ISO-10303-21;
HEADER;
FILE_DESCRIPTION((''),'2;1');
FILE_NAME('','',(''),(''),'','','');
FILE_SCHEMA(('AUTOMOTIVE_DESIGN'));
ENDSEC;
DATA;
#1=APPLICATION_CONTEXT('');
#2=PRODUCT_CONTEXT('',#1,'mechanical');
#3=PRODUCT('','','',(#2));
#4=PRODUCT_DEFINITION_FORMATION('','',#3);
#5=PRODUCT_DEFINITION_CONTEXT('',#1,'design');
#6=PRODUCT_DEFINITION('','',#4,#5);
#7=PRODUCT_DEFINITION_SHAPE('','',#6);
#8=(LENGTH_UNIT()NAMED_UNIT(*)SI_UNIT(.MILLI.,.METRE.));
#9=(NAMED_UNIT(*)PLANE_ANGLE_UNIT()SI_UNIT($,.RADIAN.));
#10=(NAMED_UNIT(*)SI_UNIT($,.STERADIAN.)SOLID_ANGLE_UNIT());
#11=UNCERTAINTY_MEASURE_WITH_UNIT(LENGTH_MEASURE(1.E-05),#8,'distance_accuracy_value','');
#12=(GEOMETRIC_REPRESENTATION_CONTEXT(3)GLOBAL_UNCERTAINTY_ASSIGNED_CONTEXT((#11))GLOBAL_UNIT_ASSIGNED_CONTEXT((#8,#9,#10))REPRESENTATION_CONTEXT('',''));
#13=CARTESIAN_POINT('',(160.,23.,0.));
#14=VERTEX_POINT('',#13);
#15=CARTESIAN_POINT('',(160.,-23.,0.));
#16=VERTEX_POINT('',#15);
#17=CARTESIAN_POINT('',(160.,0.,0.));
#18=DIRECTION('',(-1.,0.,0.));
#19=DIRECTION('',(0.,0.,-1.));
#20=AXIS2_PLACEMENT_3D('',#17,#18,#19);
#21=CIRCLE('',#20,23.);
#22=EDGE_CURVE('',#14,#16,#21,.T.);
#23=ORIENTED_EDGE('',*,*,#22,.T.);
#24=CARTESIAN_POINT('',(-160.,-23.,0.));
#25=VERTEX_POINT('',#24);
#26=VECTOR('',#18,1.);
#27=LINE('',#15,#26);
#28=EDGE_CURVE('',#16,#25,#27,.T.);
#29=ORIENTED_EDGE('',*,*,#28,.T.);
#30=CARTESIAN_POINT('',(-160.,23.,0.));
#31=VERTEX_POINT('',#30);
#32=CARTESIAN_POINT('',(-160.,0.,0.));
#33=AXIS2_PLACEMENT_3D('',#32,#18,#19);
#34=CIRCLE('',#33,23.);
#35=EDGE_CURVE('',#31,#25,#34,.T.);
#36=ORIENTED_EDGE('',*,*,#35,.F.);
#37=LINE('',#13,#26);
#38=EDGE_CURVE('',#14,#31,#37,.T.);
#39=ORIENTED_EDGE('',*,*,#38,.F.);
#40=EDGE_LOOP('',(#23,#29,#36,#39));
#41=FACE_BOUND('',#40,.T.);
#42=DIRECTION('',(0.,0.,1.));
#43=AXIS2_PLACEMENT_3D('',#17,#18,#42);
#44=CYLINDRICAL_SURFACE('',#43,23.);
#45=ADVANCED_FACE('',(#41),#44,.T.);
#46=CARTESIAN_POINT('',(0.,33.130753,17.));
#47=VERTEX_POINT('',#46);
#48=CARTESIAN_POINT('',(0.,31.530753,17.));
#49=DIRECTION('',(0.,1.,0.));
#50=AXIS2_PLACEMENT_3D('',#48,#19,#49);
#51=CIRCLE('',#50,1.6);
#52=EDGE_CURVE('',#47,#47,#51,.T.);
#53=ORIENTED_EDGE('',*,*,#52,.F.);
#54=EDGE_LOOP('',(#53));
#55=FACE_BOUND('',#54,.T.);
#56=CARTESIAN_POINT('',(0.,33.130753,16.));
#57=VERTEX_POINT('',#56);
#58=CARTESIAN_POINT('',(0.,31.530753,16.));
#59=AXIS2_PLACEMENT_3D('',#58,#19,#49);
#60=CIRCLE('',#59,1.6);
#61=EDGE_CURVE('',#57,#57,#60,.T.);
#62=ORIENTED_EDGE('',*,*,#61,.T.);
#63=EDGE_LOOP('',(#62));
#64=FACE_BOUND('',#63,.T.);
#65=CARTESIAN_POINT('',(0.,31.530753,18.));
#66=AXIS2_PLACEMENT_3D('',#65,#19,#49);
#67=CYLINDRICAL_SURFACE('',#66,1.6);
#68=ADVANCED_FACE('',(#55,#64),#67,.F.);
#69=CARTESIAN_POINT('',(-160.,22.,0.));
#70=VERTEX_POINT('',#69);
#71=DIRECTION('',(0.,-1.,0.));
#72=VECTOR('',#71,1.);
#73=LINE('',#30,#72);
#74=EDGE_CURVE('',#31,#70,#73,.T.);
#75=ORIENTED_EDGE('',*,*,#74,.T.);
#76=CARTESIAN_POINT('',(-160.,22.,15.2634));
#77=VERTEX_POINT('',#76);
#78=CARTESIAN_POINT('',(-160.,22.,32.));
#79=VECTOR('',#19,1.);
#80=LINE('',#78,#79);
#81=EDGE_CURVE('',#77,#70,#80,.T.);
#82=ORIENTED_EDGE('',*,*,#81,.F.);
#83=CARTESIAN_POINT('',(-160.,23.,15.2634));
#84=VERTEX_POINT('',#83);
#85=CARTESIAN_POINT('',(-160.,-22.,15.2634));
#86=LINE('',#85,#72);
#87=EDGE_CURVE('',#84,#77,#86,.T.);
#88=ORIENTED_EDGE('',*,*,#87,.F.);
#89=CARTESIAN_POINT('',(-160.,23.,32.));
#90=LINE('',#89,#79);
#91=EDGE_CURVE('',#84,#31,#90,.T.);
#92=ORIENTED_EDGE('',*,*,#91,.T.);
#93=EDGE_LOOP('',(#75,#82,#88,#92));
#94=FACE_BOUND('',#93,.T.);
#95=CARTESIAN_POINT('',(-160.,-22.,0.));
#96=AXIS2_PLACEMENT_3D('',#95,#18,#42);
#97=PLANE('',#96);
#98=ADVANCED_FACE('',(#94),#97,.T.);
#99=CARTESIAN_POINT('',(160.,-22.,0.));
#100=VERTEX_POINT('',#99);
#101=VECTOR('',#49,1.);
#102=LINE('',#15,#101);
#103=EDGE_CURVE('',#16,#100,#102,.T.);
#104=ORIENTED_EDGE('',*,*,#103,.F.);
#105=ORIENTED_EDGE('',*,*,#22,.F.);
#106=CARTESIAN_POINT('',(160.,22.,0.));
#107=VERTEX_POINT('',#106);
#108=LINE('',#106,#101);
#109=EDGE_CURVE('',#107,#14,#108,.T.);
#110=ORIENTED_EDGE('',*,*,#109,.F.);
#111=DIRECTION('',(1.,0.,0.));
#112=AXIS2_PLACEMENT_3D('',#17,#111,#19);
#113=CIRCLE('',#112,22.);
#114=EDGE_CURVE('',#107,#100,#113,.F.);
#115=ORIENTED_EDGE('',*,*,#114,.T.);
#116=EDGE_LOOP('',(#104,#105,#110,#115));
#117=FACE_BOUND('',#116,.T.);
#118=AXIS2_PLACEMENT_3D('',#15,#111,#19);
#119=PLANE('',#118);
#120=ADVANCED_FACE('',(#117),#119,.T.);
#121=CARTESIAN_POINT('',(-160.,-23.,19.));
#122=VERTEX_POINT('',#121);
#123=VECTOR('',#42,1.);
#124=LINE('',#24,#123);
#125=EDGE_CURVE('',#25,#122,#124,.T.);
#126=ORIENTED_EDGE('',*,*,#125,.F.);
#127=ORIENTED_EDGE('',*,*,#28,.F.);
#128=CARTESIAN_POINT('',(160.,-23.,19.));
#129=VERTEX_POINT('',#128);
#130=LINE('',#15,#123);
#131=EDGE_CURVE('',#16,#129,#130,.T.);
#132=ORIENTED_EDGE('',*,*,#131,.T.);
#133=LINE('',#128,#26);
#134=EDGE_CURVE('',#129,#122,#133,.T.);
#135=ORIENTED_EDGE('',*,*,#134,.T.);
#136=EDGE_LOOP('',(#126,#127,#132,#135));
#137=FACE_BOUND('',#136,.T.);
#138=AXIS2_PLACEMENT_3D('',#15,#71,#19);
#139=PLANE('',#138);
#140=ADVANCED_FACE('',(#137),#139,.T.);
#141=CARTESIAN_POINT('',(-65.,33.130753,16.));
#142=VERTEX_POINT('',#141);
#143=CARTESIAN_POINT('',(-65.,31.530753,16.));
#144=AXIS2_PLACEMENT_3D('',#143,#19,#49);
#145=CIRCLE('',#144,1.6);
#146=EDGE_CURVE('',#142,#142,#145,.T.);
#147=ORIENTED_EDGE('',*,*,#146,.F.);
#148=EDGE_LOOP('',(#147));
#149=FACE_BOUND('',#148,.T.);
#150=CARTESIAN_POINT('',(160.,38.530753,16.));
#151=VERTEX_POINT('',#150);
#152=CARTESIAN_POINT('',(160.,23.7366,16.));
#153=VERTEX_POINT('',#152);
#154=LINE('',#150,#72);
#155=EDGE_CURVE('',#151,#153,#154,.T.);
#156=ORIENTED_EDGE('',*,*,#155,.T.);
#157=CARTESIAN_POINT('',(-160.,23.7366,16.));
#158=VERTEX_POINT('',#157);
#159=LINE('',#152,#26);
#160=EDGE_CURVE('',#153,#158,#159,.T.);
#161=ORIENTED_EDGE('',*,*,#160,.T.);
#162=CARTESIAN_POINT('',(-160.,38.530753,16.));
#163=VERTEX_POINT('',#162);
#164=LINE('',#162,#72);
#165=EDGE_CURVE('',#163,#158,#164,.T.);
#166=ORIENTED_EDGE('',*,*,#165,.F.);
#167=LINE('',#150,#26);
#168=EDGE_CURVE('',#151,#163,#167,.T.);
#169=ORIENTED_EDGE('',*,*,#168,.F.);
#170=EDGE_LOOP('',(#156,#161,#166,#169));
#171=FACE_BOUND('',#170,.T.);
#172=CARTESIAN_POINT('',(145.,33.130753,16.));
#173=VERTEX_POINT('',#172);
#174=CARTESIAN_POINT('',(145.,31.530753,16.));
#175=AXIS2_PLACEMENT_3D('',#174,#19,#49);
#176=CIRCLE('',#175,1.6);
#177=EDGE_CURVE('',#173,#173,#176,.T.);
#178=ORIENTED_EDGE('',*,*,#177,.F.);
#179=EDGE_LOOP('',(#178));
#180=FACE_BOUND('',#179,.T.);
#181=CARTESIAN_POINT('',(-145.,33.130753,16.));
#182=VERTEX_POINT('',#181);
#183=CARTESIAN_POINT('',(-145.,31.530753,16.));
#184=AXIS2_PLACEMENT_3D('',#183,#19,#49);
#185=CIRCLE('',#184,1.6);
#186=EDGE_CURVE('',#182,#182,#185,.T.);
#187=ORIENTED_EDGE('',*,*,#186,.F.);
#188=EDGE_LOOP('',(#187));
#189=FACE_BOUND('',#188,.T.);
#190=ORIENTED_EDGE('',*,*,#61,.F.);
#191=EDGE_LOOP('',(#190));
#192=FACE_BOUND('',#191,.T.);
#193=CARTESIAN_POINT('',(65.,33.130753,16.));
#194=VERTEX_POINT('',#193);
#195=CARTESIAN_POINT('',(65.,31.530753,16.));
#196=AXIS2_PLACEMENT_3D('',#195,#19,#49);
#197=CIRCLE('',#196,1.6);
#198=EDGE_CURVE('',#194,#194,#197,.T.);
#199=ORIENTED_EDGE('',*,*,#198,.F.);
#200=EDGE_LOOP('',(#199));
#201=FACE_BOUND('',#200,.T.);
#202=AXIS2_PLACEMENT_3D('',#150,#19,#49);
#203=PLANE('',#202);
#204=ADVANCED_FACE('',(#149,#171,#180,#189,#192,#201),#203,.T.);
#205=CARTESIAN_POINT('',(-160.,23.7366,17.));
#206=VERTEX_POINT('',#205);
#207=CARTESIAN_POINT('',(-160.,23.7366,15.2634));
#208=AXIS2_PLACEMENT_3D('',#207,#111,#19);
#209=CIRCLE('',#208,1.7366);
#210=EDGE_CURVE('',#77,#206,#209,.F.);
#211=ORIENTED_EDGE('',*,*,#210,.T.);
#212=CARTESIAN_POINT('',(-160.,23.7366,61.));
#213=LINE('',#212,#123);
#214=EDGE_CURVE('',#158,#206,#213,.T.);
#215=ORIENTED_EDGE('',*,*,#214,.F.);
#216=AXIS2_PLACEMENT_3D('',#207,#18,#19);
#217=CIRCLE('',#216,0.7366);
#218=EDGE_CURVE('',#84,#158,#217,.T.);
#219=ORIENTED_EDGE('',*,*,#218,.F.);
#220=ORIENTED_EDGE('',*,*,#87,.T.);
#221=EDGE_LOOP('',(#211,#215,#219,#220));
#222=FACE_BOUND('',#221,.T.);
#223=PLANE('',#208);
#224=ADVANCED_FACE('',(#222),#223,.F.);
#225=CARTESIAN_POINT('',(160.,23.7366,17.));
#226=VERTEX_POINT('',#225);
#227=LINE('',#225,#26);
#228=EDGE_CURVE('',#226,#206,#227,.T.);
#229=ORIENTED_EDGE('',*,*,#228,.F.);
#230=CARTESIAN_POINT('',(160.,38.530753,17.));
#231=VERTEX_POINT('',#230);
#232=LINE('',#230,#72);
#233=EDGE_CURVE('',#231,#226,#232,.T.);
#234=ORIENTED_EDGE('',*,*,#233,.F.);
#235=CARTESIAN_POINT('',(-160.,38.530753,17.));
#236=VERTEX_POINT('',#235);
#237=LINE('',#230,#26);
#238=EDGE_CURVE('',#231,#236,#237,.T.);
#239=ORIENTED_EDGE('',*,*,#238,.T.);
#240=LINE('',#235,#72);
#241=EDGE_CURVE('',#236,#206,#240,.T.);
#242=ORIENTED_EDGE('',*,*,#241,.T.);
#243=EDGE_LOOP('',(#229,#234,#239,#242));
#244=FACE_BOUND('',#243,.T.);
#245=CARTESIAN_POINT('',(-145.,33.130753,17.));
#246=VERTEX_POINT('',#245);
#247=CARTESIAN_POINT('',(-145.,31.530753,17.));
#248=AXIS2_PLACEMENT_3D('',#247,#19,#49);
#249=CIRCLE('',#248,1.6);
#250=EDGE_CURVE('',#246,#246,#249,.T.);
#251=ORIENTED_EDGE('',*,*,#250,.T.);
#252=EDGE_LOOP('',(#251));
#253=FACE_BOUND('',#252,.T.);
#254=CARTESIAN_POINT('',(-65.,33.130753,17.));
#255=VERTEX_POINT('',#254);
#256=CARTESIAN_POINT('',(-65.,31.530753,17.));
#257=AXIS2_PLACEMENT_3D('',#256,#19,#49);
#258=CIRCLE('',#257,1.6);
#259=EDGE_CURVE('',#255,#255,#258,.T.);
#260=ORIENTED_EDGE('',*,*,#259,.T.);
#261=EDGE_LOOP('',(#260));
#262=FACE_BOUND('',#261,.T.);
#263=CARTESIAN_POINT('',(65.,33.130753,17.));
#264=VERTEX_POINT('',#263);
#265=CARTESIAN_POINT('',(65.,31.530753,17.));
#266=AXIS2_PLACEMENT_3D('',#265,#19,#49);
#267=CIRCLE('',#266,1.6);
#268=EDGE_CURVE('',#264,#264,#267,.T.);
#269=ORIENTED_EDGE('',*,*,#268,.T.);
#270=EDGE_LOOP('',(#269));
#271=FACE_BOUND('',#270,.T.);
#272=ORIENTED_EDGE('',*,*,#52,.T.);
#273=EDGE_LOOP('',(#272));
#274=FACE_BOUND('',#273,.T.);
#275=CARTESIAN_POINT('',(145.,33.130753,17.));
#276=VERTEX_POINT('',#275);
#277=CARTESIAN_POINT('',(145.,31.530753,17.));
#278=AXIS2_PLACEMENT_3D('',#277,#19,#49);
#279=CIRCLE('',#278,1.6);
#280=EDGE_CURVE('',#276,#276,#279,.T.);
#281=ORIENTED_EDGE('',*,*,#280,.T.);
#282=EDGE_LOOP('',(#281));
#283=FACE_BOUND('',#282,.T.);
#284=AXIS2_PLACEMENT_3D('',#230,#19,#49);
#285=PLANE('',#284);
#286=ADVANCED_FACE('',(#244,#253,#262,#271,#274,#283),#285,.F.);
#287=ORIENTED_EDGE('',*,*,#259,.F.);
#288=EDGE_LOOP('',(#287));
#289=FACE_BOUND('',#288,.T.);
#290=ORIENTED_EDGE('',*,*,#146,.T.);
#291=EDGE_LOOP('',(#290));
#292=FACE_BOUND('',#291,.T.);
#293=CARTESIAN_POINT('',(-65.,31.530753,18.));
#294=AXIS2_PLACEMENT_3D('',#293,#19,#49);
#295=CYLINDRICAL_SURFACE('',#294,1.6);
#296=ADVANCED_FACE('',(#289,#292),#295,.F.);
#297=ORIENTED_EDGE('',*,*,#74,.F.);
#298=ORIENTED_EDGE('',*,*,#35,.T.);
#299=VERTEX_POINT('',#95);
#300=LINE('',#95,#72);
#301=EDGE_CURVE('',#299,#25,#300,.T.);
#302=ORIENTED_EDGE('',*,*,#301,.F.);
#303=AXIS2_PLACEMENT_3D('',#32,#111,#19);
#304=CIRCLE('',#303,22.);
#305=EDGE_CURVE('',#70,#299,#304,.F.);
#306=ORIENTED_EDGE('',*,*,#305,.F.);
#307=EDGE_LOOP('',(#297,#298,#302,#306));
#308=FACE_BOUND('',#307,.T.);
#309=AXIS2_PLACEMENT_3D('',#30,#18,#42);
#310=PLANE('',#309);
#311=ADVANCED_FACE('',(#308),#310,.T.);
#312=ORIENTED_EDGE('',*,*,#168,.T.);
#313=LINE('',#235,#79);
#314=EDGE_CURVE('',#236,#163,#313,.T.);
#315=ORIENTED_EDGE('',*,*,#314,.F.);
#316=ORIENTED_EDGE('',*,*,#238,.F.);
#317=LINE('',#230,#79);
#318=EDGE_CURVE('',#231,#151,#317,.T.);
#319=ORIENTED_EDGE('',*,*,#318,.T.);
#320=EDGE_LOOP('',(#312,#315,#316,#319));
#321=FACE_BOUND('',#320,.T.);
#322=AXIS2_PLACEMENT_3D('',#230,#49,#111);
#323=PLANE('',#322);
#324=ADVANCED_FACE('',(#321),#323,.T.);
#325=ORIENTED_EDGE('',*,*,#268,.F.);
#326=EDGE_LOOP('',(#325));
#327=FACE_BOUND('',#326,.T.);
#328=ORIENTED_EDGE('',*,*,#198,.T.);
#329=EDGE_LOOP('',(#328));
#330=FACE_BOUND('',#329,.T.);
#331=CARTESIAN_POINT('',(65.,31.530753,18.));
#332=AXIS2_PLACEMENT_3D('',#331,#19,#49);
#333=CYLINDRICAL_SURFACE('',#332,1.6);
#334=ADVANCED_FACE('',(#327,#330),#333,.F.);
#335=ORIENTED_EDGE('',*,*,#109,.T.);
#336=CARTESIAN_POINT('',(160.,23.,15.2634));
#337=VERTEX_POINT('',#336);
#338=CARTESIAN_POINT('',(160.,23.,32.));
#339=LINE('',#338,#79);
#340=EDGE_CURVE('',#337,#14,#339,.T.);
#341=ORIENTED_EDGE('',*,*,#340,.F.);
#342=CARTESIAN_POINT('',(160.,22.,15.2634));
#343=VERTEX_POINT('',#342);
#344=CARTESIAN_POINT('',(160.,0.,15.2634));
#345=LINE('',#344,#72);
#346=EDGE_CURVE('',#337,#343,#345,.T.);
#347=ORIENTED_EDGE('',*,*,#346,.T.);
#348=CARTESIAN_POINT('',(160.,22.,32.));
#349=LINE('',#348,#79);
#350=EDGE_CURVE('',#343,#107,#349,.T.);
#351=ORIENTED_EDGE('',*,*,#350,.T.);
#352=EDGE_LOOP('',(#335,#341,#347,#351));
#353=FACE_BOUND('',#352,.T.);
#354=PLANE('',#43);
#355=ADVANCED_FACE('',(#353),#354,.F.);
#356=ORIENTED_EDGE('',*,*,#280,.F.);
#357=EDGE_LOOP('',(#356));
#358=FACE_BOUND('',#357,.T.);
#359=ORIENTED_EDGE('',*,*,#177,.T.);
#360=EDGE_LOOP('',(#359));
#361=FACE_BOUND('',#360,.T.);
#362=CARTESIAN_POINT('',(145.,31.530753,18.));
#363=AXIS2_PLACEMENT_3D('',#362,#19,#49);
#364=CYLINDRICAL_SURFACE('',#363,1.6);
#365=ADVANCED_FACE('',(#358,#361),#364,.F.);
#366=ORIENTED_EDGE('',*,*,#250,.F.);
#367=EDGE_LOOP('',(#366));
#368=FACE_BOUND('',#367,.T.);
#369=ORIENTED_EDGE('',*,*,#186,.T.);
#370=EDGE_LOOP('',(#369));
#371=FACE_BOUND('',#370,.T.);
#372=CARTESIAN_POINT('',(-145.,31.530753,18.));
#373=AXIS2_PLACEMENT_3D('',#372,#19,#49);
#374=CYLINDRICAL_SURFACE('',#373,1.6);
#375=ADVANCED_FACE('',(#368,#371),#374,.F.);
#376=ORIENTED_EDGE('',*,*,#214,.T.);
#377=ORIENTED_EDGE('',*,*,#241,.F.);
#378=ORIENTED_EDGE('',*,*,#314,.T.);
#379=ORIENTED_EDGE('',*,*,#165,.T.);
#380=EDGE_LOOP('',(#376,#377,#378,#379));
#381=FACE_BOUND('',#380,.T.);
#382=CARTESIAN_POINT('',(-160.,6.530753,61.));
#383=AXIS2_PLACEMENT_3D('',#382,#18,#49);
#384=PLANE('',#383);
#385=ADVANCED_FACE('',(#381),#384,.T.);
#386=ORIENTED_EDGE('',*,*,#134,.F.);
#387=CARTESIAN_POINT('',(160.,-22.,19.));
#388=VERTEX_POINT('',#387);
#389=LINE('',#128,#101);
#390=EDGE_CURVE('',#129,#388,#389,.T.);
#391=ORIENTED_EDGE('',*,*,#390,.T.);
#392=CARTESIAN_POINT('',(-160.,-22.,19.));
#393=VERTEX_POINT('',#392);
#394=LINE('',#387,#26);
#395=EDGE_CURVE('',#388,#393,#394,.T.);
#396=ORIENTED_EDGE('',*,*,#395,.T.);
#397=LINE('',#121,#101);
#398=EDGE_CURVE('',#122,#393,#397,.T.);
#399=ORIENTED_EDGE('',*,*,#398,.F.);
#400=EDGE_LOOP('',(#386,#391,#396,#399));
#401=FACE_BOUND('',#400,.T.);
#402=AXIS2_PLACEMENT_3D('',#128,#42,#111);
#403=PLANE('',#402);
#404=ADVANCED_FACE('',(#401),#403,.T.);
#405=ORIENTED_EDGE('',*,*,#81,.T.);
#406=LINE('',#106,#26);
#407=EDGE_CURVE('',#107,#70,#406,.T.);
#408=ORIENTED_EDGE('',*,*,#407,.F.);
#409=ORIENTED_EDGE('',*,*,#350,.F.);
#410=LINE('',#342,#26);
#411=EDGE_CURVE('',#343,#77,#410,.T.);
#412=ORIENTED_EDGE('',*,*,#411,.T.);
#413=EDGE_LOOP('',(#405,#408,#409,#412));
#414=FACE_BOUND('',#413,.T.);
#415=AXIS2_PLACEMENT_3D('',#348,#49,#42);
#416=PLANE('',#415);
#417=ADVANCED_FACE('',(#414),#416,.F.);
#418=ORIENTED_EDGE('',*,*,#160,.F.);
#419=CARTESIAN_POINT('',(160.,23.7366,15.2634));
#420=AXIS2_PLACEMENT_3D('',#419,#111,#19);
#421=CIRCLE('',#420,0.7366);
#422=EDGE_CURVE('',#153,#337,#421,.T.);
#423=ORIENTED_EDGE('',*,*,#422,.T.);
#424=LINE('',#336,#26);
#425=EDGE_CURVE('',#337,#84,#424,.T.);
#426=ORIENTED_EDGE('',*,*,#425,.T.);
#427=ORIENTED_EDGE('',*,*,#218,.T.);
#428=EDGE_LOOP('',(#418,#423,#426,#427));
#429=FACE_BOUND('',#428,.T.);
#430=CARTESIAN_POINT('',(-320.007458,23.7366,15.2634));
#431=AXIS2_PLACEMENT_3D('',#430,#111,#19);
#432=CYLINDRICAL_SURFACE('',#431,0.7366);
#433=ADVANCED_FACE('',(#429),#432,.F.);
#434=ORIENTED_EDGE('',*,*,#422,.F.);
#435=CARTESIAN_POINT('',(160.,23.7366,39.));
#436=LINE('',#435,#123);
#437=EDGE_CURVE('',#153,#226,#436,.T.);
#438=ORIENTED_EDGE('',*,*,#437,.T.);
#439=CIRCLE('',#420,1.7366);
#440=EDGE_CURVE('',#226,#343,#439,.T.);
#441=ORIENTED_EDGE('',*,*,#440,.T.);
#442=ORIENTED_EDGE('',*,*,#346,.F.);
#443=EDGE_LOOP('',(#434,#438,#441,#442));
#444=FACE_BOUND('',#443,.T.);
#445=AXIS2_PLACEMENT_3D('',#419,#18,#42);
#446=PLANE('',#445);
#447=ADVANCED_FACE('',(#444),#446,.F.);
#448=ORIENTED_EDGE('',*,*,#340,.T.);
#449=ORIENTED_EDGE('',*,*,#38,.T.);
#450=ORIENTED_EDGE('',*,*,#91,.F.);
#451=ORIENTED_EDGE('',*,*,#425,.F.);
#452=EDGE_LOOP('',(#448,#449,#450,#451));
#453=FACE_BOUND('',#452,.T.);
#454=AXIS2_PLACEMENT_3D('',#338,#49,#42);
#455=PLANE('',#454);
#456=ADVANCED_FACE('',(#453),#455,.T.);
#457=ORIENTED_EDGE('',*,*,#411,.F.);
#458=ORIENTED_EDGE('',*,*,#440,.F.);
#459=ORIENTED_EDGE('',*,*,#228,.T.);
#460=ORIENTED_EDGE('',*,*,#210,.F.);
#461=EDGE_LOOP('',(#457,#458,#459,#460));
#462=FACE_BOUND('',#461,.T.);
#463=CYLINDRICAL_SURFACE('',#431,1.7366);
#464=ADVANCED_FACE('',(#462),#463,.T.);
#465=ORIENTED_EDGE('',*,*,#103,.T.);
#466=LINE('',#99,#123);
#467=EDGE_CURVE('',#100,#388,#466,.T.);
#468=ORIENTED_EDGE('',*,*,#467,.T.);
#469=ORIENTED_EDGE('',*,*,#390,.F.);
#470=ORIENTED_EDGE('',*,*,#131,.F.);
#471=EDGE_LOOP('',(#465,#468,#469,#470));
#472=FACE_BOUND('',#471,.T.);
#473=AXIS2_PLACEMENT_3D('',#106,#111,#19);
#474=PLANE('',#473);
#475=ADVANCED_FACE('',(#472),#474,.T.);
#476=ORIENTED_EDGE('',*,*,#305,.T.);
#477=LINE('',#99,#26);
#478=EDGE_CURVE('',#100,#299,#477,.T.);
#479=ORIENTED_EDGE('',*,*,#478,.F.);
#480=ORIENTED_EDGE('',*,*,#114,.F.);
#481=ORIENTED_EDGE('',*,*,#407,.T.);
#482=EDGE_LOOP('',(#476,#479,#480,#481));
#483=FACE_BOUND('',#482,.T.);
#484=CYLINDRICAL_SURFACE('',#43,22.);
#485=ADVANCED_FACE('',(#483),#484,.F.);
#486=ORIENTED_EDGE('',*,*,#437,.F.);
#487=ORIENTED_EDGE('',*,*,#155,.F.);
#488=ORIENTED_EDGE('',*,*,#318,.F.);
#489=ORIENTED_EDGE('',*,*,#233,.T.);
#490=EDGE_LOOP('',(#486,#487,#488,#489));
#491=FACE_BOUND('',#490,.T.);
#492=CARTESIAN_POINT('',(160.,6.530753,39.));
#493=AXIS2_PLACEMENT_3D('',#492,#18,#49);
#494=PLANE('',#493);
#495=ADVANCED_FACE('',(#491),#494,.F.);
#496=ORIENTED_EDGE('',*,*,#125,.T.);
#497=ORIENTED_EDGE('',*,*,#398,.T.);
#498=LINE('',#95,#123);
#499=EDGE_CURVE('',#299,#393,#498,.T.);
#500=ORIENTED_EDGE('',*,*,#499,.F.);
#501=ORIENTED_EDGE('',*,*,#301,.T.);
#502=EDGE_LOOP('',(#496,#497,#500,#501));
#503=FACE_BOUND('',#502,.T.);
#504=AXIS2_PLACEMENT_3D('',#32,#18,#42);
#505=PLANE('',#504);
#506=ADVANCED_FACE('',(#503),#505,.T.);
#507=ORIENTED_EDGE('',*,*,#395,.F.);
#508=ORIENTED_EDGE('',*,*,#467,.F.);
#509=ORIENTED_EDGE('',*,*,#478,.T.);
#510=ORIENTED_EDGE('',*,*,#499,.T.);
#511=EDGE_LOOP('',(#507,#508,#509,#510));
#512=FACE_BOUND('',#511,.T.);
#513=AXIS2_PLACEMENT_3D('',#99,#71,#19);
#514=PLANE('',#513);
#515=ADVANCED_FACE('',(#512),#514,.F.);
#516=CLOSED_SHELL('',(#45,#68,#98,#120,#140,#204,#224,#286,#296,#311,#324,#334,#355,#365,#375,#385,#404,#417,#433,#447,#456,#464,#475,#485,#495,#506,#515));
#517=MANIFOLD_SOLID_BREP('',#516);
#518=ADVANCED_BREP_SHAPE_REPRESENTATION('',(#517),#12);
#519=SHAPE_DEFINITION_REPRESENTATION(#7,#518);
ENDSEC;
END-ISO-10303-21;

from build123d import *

# Parameters (mm, degrees)
SM_BASE_FLANGE_1_DEPTH = 160
OTHER_START            = -160
OTHER_1_DEPTH          = 320
OTHER_1_2_DEPTH        = 320
SKETCH_4_R             = 1.6
CUT_EXTRUDE_1_DEPTH    = 2


# Read off the part's stored shape, not the designer's step: 绘制的折弯1
# Sheet-metal steps are written as plain solids
with BuildPart() as part:
    # Sketch 1 → 基体-法兰1 (new, symmetric)
    with BuildSketch(Plane(origin=(0, 0, 0), x_dir=(0, 0, -1), z_dir=(1, 0, 0))):
        with BuildLine():
            Line((-32, 23), (0, 23))
            ThreePointArc((0, 23), (23, 0), (0, -23))
            Line((0, -23), (-19, -23))
            Line((-19, -23), (-19, -22))
            Line((-19, -22), (0, -22))
            ThreePointArc((0, -22), (22, 0), (0, 22))
            Line((0, 22), (-32, 22))
            Line((-32, 22), (-32, 23))
        make_face()
    extrude(amount=SM_BASE_FLANGE_1_DEPTH, both=True)

    # Other 1 outline → Other 1 (cut)
    with BuildSketch(Plane.YZ.offset(OTHER_START)):
        with BuildLine():
            ThreePointArc((22, 15.2634), (22.271171885, 16.195226164), (23, 16.83604109))
            Line((23, 16.83604109), (23, 32))
            Line((23, 32), (22, 32))
            Line((22, 32), (22, 15.2634))
        make_face()
    extrude(amount=OTHER_1_DEPTH, mode=Mode.SUBTRACT)

    # Other 1 2 outline → Other 1 2 (add)
    with BuildSketch(Plane.YZ.offset(OTHER_START)):
        with BuildLine():
            ThreePointArc((23, 15.2634), (23.215745145, 15.784254855), (23.7366, 16))
            Line((23.7366, 16), (38.530753262, 16))
            Line((38.530753262, 16), (38.530753262, 17))
            Line((38.530753262, 17), (23.7366, 17))
            ThreePointArc((23.7366, 17), (23.359286442, 16.958514757), (23, 16.83604109))
            Line((23, 16.83604109), (23, 15.2634))
        make_face()
    extrude(amount=OTHER_1_2_DEPTH)

    # 草图4 → 切除-拉伸1 (cut)
    with BuildSketch(Plane(origin=(0, 0, 16), x_dir=(-1, 0, 0), z_dir=(0, 0, -1))):
        with Locations(Location((0, 31.530753262, 0), (0, 0, 90))):
            Circle(SKETCH_4_R)
        with Locations(Location((145, 31.530753262, 0), (0, 0, 90))):
            Circle(SKETCH_4_R)
        with Locations(Location((65, 31.530753262, 0), (0, 0, 90))):
            Circle(SKETCH_4_R)
        with Locations(Location((-145, 31.530753262, 0), (0, 0, 90))):
            Circle(SKETCH_4_R)
        with Locations(Location((-65, 31.530753262, 0), (0, 0, 90))):
            Circle(SKETCH_4_R)
    extrude(amount=-CUT_EXTRUDE_1_DEPTH, mode=Mode.SUBTRACT)


solid = part.part
